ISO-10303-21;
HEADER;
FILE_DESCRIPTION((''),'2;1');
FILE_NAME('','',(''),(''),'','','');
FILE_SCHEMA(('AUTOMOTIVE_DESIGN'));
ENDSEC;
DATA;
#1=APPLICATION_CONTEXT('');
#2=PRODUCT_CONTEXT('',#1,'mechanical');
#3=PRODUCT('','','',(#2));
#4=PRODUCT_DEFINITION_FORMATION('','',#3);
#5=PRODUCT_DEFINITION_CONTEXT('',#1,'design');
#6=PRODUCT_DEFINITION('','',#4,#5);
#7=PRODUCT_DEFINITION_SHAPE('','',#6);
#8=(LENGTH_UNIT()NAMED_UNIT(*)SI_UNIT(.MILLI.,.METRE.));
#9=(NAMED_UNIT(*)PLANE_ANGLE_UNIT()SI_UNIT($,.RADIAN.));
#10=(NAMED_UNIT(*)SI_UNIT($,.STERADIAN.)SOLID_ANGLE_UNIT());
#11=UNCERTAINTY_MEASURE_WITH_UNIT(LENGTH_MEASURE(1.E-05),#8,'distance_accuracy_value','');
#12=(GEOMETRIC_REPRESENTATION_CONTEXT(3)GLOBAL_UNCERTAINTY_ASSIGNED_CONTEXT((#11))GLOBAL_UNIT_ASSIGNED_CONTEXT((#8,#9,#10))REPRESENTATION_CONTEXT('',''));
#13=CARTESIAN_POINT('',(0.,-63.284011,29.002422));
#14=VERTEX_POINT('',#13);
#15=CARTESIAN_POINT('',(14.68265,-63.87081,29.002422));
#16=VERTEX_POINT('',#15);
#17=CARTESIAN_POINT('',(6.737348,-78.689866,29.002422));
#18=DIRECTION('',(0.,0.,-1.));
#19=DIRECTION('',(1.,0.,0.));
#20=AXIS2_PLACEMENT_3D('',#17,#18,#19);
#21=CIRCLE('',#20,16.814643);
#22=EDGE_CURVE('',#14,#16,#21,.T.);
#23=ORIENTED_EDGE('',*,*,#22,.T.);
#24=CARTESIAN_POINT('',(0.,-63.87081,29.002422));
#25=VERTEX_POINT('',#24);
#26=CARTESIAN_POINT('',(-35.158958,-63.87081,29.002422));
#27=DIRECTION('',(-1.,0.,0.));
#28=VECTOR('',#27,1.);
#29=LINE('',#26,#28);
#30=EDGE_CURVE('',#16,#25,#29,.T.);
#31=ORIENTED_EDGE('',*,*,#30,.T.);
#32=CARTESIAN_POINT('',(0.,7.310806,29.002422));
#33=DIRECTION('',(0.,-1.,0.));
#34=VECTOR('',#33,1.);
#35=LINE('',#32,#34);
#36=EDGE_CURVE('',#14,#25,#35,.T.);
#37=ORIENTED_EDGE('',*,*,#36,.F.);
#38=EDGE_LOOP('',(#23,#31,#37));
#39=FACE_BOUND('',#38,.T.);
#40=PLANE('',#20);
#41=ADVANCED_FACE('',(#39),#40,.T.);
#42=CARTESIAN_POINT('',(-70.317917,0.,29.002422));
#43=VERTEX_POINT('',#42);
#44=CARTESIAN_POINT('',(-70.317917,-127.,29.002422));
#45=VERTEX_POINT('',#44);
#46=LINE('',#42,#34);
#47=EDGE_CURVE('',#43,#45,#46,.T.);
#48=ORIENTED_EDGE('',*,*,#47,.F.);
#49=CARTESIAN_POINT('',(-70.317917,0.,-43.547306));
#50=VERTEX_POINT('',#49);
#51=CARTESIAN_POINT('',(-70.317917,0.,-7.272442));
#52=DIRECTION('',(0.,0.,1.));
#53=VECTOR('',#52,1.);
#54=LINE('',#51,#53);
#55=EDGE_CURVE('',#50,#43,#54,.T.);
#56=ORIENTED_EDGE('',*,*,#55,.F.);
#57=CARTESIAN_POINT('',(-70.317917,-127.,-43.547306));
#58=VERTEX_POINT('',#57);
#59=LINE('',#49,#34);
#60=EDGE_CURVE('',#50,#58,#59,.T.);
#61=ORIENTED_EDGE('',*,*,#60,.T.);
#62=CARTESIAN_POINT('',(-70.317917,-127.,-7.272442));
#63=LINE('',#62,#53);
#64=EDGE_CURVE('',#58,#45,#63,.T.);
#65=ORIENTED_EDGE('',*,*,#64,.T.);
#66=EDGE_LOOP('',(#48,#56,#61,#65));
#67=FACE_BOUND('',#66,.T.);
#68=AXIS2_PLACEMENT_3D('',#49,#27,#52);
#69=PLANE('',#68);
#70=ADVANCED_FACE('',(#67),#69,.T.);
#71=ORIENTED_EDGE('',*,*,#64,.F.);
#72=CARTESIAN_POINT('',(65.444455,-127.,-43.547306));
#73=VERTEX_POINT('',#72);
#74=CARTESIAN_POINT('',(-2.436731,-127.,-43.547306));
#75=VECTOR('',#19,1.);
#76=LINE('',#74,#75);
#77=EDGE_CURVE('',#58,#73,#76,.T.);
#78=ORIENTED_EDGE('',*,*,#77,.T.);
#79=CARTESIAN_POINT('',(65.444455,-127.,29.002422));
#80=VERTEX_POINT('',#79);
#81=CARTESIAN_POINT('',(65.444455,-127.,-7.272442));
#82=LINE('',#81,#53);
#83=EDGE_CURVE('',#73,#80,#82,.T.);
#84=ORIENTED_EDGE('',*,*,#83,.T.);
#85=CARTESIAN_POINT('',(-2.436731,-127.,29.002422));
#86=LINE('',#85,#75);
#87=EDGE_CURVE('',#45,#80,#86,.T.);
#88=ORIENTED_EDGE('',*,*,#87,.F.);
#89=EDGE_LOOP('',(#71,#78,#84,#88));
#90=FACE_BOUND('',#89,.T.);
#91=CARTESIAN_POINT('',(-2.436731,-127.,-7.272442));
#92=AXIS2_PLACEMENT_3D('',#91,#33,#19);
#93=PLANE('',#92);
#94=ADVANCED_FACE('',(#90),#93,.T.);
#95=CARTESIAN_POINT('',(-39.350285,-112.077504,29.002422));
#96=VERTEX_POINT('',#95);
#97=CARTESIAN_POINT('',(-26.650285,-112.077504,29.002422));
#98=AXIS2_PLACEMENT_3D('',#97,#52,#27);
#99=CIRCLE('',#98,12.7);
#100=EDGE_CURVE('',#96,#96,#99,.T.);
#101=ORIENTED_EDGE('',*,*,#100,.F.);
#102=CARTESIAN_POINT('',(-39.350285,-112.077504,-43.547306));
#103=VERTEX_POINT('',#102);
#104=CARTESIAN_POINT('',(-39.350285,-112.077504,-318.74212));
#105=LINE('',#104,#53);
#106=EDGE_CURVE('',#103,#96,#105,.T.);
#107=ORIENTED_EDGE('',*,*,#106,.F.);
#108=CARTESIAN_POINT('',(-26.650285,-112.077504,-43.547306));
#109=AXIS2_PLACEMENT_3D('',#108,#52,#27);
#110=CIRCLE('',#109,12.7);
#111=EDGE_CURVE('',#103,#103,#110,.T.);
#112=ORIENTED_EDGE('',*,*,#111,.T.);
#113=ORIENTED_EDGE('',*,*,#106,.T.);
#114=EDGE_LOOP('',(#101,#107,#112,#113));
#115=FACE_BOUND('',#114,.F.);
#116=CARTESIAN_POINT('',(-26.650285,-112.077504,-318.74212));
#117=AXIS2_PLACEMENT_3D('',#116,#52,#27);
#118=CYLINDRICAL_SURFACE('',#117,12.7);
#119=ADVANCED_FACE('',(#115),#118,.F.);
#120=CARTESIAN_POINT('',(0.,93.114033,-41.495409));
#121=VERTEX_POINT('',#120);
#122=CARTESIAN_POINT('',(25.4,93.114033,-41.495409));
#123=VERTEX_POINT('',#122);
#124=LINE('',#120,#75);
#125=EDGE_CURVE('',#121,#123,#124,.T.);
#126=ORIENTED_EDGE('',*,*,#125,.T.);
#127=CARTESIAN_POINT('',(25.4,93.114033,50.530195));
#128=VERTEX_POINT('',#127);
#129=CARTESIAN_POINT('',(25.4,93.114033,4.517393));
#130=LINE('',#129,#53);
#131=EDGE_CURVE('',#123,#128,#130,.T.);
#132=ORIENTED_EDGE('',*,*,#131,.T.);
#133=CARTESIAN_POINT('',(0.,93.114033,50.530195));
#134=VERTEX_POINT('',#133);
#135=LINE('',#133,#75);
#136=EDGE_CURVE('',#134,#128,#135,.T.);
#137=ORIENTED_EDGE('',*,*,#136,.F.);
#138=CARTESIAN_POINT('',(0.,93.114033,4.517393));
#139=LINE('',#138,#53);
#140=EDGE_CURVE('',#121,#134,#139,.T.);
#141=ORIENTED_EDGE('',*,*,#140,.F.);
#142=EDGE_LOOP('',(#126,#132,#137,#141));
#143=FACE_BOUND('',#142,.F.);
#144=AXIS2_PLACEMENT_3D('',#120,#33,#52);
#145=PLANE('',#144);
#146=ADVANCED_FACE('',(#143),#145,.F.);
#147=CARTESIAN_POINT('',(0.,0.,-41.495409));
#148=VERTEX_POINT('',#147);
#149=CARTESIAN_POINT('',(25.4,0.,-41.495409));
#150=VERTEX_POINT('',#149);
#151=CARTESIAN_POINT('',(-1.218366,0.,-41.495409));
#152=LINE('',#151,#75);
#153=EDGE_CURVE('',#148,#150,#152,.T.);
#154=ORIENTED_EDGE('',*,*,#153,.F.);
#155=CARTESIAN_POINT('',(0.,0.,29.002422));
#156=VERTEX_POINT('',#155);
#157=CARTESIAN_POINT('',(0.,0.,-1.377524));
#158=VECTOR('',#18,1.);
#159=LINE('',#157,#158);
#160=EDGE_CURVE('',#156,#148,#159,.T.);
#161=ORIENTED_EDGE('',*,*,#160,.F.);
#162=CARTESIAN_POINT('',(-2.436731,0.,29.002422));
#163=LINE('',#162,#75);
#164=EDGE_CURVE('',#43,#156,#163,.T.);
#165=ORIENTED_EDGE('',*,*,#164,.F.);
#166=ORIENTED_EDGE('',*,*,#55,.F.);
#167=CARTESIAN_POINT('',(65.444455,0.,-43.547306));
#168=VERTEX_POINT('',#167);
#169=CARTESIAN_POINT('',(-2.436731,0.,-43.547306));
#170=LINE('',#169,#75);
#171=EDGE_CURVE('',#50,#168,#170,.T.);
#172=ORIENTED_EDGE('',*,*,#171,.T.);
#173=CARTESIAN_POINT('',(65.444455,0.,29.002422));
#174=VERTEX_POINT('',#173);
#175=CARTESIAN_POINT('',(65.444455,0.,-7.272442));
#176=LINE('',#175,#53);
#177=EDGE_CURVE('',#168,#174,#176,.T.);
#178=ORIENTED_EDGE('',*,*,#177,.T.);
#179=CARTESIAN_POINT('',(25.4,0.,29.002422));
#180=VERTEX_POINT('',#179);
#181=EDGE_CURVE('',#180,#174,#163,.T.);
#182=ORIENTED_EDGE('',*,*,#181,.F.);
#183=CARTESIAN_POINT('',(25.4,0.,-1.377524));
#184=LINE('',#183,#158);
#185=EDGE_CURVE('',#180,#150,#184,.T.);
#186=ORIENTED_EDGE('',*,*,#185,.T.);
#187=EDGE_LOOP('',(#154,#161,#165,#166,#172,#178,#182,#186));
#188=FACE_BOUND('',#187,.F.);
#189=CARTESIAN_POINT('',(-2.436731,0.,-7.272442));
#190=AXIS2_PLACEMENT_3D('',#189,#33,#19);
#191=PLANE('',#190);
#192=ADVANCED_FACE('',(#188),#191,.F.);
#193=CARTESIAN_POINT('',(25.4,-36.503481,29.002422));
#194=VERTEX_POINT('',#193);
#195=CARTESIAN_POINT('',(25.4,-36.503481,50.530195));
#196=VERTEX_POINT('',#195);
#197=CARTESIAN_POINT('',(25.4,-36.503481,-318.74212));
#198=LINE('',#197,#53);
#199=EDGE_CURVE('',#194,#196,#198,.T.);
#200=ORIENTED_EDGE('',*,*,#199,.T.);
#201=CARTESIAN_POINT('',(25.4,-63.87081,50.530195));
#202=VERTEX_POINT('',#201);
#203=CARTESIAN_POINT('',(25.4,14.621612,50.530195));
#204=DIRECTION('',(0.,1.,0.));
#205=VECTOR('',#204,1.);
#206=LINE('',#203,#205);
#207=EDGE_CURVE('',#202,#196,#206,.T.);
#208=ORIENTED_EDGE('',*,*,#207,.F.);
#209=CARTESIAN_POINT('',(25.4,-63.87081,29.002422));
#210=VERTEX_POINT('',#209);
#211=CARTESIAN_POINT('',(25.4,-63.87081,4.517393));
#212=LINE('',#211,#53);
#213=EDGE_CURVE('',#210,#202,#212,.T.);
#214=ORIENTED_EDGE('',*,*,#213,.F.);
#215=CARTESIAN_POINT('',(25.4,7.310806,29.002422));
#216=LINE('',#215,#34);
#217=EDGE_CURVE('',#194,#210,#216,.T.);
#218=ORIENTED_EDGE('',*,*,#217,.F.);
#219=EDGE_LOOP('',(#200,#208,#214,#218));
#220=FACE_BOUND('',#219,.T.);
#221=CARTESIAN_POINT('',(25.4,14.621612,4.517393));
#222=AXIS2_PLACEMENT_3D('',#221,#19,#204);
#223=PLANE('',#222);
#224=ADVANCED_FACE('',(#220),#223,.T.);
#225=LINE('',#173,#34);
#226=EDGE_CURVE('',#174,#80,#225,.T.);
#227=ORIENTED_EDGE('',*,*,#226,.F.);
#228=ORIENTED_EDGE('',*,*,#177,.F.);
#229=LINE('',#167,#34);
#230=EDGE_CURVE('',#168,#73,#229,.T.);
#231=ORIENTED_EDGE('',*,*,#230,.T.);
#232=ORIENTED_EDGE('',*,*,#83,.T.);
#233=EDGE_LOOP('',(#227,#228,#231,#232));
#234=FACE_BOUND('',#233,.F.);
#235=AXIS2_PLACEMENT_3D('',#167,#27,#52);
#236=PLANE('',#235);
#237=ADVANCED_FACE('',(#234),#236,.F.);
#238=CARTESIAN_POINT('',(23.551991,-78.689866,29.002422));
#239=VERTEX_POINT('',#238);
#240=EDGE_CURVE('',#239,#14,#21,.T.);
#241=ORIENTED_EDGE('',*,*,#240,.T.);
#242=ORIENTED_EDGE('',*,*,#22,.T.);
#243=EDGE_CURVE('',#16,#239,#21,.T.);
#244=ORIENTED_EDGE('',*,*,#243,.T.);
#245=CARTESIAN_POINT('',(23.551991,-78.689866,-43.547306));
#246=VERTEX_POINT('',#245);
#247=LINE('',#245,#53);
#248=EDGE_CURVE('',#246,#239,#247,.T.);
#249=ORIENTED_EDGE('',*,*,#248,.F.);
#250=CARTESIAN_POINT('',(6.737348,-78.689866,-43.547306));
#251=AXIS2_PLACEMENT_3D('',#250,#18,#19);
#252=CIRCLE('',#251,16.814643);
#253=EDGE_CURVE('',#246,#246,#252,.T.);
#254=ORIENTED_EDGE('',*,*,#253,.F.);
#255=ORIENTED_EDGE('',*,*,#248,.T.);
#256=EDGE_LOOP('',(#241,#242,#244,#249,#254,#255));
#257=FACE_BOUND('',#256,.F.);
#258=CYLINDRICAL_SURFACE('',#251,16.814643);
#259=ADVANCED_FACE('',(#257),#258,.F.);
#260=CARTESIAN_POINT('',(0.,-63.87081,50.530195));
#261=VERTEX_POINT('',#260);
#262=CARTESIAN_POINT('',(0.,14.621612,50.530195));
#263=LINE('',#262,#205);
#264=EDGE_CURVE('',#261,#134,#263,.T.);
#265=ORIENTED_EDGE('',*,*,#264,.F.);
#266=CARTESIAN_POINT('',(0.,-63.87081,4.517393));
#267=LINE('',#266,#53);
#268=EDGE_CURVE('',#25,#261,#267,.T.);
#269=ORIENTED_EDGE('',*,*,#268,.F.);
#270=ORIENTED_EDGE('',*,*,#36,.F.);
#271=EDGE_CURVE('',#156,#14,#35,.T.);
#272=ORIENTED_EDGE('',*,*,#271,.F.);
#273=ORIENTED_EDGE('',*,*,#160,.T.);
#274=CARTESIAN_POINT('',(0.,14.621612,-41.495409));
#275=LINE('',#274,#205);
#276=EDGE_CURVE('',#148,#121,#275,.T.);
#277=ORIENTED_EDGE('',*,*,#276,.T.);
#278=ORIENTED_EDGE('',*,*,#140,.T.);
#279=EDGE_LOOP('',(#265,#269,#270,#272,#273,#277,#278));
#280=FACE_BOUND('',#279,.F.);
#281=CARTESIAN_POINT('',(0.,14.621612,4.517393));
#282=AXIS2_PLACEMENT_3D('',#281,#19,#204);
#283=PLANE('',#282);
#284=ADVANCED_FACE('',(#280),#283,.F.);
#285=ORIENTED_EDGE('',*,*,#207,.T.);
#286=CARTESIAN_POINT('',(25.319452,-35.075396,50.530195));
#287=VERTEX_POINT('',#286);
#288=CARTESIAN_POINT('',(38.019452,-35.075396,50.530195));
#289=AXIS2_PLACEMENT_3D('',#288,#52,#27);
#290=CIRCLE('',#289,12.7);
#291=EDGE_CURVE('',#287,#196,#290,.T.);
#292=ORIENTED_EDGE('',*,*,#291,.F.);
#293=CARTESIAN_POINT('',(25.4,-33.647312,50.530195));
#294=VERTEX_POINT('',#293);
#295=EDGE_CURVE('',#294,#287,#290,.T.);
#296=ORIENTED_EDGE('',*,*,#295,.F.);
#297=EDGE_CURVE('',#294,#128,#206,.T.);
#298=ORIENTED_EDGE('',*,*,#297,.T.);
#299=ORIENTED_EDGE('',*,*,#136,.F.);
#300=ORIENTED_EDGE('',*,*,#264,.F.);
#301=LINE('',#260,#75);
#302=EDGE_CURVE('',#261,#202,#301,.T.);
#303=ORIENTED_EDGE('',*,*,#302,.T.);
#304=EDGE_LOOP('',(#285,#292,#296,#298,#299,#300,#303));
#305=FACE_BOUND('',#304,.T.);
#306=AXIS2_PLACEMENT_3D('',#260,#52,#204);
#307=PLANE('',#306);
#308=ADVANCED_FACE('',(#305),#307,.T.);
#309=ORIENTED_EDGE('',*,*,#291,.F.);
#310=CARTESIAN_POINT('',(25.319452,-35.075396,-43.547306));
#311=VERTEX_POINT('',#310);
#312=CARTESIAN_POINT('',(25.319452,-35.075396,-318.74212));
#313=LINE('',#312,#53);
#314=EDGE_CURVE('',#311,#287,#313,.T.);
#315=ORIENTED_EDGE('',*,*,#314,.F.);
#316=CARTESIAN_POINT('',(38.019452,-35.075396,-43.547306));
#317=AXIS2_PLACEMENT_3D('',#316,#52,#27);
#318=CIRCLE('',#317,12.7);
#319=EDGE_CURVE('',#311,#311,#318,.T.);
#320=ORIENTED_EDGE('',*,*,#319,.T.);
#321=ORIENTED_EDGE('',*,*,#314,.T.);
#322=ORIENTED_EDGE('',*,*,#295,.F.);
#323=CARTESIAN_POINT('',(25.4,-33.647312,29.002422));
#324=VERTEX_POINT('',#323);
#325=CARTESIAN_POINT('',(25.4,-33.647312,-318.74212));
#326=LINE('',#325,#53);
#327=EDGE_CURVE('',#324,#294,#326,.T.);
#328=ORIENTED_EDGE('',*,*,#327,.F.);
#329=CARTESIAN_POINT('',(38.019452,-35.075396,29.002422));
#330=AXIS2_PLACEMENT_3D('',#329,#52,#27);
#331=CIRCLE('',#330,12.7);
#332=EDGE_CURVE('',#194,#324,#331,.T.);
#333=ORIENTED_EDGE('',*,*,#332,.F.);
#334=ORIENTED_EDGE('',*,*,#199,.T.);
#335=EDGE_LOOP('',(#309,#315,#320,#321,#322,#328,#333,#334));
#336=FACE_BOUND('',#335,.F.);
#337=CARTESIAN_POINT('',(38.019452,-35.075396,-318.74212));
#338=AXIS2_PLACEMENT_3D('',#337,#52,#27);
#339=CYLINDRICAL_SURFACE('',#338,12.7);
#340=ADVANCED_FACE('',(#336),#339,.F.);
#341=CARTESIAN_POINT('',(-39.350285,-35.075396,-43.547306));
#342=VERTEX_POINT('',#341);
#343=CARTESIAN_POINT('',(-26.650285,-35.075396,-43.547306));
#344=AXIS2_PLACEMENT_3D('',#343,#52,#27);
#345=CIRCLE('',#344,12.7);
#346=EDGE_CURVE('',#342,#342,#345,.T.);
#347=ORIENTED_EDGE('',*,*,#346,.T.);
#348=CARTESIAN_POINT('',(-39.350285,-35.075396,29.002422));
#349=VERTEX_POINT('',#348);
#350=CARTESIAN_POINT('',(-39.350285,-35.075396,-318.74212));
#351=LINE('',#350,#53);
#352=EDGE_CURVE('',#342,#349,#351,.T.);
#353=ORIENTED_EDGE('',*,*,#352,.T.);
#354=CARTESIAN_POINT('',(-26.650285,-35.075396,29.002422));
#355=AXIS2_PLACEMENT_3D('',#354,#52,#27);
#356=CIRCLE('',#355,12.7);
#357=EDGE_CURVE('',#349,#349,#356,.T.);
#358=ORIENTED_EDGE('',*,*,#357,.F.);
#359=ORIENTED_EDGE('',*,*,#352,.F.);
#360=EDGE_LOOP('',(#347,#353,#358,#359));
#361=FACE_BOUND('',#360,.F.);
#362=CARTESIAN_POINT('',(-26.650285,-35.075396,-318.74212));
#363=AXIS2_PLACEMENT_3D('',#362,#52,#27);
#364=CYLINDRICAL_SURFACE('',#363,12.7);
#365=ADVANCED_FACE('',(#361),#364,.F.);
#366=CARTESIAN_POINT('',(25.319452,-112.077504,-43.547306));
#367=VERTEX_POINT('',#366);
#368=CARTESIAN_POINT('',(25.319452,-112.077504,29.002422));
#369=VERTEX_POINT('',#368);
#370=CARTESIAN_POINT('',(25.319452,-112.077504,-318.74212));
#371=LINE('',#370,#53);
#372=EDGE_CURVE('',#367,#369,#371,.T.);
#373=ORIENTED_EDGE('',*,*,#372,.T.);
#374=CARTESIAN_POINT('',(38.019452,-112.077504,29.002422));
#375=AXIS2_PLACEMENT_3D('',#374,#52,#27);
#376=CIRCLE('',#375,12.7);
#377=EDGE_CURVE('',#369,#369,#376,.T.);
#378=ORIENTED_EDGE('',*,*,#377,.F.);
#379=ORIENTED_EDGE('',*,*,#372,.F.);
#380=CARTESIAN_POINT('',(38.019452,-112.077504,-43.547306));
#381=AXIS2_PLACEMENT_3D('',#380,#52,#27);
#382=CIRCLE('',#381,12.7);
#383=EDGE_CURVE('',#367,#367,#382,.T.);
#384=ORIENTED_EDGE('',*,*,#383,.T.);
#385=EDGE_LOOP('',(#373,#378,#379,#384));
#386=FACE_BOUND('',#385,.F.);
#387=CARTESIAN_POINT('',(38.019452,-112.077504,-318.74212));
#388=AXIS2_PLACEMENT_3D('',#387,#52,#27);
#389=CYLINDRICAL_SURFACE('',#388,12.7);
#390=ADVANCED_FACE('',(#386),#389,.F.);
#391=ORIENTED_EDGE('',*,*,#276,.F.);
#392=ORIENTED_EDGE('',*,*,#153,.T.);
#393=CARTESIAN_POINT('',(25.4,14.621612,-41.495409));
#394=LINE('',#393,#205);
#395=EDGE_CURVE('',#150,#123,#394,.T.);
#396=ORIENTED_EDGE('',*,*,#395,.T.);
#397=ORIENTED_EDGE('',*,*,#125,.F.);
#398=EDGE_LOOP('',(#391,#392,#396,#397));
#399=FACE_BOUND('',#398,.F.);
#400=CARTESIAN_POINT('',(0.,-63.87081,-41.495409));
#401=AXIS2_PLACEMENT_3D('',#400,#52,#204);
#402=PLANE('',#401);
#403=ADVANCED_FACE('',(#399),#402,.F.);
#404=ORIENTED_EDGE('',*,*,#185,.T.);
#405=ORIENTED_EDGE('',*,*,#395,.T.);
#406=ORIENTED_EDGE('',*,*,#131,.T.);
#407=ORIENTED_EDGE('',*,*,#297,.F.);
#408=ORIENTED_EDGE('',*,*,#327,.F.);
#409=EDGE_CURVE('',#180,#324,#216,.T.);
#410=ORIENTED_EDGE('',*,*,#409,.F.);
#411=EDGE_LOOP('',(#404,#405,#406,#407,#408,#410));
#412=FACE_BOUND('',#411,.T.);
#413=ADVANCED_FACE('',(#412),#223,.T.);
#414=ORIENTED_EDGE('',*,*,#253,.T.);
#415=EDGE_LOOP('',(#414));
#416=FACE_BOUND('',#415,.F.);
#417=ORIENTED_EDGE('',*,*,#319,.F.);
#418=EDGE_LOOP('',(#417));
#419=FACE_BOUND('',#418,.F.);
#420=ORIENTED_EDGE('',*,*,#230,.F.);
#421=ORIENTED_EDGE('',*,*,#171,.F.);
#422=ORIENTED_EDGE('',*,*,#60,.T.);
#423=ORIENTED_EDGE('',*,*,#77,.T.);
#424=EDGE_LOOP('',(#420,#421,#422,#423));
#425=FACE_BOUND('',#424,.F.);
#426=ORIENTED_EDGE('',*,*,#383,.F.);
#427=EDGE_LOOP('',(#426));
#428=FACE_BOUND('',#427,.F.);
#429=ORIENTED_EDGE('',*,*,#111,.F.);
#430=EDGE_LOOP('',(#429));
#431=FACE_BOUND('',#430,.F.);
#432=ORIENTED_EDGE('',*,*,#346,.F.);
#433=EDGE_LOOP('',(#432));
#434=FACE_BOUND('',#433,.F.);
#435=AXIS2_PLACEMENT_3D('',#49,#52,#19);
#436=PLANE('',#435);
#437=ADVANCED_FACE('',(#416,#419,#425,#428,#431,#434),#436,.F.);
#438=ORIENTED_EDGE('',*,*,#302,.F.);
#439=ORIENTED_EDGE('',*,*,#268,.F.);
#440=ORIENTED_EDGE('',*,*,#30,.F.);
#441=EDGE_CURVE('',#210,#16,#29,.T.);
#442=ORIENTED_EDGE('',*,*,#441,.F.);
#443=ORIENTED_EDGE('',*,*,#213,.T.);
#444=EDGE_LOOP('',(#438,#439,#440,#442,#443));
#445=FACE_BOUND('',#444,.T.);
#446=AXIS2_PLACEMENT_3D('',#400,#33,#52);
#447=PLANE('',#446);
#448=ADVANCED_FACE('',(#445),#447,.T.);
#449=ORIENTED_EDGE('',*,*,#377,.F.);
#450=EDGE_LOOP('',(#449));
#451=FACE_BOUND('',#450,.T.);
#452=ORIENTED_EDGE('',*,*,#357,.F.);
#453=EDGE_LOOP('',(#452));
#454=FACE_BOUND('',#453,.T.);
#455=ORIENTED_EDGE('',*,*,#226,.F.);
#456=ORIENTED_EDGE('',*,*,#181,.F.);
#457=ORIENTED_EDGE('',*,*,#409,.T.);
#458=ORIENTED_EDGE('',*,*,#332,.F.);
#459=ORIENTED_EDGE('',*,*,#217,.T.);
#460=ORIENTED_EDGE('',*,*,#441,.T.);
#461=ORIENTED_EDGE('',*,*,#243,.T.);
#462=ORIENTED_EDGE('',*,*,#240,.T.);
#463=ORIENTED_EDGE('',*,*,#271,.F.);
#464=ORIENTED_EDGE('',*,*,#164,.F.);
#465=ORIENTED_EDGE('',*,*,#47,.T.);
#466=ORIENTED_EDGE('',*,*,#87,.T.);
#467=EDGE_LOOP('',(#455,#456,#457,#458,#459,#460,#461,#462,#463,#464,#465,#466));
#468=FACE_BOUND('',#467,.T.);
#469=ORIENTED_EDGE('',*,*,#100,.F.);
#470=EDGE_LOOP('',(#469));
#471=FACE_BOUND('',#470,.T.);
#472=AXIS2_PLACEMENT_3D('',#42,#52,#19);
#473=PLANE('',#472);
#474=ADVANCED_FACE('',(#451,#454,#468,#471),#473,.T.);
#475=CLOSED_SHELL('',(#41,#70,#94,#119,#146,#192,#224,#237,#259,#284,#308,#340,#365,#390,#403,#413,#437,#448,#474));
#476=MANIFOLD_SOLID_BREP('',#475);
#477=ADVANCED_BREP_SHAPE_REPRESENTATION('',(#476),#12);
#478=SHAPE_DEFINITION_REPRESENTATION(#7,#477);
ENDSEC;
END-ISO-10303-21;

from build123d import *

# Parameters (mm, degrees)
F0_W     = 156.9848433137
F0_H     = 92.025604099
F1_DEPTH = 25.4
F2_W     = 135.7623711228
F2_H     = 72.5497286767
F4_DEPTH = 127
F6_D     = 25.4
F8_R     = 16.8146432666
F9_DEPTH = 72.5497286767


# Not quite as in the source:
# - a feature of the source that left no trace in its solid (it failed there, or was rolled back) is left out


with BuildPart() as f1:
    # F0 (on Right) → F1 (new body)
    with BuildSketch(Plane.YZ):
        with Locations((14.6216116846, 4.5173931867)):
            Rectangle(F0_W, F0_H)
    extrude(amount=F1_DEPTH)

    # F2 (on Front) → F4 (join)
    with BuildSketch(Plane.XZ):
        with Locations((-2.4367310107, -7.2724418715)):
            Rectangle(F2_W, F2_H)
    extrude(amount=F4_DEPTH)

    # F6 (through all)
    with Locations(Plane(origin=(0, 0, -43.5473062098), x_dir=(1, 0, 0), z_dir=(0, 0, -1))):
        with Locations((38.019452244, 112.0775043964), (38.019452244, 35.0753962994), (-26.6502853483, 35.0753962994), (-26.6502853483, 112.0775043964)):
            Hole(F6_D / 2)

    # F8 (on face) → F9 (cut, through all)
    with BuildSketch(Plane(origin=(0, 0, -43.5473062098), x_dir=(1, 0, 0), z_dir=(0, 0, -1))):
        with Locations((6.7373481579, 78.689865768)):
            Circle(F8_R)
    extrude(amount=-F9_DEPTH, mode=Mode.SUBTRACT)


solid = f1.part
